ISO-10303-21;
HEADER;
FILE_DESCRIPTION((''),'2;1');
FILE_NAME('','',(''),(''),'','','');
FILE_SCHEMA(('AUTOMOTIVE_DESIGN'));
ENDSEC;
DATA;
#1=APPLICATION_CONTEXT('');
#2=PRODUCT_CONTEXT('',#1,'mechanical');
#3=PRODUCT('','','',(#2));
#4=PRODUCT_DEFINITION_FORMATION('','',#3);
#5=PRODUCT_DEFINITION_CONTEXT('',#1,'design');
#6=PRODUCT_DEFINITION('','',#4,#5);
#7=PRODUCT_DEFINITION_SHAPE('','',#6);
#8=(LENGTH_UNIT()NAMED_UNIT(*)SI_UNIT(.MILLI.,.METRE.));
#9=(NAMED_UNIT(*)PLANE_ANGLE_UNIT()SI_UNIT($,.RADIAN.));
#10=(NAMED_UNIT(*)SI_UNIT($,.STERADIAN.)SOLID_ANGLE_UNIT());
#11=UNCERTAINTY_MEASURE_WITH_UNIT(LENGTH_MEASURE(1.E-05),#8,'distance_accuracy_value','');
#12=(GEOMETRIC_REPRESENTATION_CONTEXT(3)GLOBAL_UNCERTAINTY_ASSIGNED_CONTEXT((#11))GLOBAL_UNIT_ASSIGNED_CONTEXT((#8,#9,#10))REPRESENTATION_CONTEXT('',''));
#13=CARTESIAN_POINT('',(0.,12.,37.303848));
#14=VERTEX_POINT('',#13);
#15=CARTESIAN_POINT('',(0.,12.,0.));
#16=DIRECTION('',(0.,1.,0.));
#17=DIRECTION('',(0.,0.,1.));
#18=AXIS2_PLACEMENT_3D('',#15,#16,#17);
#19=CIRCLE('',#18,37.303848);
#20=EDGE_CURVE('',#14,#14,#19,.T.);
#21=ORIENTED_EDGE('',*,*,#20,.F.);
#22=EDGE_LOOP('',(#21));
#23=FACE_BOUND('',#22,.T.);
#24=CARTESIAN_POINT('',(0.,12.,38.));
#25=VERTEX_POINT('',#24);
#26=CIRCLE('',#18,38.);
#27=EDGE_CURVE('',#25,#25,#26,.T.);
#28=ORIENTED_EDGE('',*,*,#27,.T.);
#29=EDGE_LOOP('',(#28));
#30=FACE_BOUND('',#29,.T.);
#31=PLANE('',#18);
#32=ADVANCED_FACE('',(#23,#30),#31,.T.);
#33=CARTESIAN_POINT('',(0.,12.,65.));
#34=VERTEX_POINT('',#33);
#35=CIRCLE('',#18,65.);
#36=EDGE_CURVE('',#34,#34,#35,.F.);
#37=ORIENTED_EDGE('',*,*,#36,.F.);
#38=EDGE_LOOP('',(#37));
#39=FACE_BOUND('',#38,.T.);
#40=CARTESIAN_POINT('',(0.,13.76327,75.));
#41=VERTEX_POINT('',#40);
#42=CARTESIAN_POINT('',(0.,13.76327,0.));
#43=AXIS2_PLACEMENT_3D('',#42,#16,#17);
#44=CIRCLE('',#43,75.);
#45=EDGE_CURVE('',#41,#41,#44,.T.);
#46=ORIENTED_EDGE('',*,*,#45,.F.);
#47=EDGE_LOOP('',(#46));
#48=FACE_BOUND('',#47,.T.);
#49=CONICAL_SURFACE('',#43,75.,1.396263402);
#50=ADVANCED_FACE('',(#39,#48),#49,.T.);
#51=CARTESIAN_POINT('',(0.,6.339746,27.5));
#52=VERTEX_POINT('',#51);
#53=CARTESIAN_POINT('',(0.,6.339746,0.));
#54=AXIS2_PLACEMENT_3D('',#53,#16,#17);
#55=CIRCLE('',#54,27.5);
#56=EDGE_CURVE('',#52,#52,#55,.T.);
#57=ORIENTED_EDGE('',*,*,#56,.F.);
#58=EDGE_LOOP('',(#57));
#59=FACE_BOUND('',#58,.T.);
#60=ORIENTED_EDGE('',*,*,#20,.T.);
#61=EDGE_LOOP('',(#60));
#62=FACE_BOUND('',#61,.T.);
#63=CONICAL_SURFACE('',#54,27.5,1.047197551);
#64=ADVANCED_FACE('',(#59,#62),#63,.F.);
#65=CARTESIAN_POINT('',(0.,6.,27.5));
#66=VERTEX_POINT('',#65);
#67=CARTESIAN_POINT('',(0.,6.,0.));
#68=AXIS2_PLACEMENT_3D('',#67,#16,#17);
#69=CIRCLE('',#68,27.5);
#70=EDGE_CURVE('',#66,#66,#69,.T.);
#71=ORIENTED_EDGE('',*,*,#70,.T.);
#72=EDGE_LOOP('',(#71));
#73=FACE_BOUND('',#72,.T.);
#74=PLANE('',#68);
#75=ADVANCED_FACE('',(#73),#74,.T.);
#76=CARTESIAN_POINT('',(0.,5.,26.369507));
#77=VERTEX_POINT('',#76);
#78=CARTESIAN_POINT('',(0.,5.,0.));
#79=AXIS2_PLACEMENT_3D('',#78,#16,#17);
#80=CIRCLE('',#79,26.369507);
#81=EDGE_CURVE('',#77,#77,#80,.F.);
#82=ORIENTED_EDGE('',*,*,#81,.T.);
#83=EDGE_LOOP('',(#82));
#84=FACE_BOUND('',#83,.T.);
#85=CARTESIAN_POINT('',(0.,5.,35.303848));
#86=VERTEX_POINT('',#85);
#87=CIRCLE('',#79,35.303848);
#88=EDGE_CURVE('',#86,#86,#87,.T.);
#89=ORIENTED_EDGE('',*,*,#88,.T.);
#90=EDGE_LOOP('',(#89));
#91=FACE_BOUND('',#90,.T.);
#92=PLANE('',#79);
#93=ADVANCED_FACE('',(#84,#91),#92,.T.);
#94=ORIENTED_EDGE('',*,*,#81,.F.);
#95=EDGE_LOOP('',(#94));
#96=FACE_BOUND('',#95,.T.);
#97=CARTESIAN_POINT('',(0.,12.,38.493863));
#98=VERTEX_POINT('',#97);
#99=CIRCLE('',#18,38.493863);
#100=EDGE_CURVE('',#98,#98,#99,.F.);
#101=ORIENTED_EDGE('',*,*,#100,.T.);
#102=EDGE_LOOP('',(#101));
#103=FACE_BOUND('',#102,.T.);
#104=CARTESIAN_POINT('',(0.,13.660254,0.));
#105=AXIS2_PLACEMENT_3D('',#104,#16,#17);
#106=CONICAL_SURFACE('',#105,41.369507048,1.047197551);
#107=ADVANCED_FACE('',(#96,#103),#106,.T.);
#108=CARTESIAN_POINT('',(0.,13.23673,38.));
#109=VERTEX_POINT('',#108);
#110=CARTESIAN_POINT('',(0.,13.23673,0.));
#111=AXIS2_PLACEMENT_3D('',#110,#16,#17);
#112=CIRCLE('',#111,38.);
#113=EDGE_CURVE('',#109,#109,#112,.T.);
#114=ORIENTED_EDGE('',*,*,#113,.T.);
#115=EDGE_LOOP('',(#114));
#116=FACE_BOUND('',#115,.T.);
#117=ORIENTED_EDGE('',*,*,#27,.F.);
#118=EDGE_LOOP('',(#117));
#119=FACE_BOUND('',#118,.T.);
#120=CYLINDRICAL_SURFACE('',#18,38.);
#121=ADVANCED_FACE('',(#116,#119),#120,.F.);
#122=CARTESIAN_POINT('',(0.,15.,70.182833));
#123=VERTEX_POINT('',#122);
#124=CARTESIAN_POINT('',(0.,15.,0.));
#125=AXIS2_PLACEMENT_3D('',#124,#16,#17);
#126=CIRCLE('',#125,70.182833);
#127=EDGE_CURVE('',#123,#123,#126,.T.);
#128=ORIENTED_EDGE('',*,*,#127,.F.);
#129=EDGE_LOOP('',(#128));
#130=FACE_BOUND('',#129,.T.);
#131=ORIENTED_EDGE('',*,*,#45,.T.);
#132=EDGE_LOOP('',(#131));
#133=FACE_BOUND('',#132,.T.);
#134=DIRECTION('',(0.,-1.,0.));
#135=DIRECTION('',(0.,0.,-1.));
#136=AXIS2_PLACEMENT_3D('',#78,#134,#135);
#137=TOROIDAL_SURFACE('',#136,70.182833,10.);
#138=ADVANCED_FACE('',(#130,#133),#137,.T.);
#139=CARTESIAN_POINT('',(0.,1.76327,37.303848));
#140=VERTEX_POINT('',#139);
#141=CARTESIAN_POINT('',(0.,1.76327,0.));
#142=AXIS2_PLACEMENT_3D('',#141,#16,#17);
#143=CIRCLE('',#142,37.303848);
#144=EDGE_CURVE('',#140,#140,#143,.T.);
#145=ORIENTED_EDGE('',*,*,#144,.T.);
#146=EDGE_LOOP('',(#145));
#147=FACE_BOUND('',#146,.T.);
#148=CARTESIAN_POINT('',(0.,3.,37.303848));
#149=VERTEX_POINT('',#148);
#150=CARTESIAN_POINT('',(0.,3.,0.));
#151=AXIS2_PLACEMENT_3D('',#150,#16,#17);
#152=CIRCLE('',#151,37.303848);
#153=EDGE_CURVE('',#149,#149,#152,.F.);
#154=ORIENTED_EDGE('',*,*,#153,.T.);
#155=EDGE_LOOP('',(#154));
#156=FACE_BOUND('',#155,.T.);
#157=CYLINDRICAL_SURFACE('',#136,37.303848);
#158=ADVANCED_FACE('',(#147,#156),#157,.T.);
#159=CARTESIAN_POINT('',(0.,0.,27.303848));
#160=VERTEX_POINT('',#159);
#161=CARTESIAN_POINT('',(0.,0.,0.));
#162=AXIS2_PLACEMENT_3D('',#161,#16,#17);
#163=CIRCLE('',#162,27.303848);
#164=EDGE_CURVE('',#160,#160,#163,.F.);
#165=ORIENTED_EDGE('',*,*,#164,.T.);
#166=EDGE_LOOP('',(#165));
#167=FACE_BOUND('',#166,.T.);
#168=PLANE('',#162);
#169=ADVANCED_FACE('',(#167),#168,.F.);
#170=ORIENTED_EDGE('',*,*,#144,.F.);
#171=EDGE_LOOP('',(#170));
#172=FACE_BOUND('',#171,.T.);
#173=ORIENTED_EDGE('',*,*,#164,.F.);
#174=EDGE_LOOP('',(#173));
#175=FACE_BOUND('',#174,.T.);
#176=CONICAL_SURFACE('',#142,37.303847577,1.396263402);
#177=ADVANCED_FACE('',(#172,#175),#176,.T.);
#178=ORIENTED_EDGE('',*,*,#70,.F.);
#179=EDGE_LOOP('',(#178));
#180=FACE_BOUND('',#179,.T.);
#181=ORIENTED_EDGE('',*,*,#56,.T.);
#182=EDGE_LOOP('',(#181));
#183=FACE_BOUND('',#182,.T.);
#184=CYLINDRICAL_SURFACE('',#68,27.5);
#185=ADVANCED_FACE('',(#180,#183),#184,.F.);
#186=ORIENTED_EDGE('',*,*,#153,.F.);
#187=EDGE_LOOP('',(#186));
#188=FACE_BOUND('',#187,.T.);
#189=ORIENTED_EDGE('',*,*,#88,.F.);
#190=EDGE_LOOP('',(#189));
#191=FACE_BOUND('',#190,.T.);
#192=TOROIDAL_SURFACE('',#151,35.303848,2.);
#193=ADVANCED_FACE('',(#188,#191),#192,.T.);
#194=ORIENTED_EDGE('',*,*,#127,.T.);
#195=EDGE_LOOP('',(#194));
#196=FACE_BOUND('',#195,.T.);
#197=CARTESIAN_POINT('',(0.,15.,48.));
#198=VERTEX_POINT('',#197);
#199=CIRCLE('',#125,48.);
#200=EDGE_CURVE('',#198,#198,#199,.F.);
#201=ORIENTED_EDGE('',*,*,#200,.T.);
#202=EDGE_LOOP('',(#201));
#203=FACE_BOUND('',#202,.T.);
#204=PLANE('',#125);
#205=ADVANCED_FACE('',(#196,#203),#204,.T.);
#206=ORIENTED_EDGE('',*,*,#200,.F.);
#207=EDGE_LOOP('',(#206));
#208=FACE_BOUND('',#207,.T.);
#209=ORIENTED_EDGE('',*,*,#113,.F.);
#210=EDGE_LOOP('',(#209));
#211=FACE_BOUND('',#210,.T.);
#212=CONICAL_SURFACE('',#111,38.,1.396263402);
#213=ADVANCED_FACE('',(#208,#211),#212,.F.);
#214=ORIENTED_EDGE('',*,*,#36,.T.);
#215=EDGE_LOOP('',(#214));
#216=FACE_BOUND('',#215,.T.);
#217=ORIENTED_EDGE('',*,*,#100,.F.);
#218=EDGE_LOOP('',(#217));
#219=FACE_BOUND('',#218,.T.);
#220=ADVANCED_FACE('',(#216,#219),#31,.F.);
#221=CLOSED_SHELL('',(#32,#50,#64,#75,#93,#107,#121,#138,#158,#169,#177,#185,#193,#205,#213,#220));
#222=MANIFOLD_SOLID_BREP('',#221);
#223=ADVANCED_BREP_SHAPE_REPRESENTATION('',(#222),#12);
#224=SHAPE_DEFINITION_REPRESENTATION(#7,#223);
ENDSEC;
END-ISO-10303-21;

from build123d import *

# Parameters (mm, degrees)
SKETCH1_R           = 41.369507048
BOSS_EXTRUDE1_DEPTH = 15
SKETCH3_R           = 27.5
CUT_EXTRUDE1_DEPTH  = 9
SKETCH4_R           = 41.369507048
CUT_EXTRUDE2_DEPTH  = 5
SKETCH5_R           = 53.188342474
BOSS_EXTRUDE2_DEPTH = 2
SKETCH6_R           = 40
CUT_EXTRUDE8_DEPTH  = 2
FILLET1_R           = 10
FILLET3_R           = 5
SKETCH7_R           = 75
BOSS_EXTRUDE3_DEPTH = 3
SKETCH8_R           = 38
CUT_EXTRUDE11_DEPTH = 3
CHAMFER4_SIZE       = 10
CHAMFER4_SIZE2      = 1.763269807
CHAMFER5_SIZE       = 10
CHAMFER5_SIZE2      = 1.763269807
FILLET5_R           = 10
SKETCH10_R          = 37.303847577
BOSS_EXTRUDE4_DEPTH = 5
CHAMFER6_SIZE       = 10
CHAMFER6_SIZE2      = 1.763269807
FILLET6_R           = 2


with BuildPart() as part:
    # Sketch1 → Boss-Extrude1 (new body)
    with BuildSketch(Plane(origin=(0, 0, 0), x_dir=(1, 0, 0), z_dir=(0, 1, 0))):
        with Locations(Location((0, 0, 0), (0, 0, 270))):
            Circle(SKETCH1_R)
    extrude(amount=BOSS_EXTRUDE1_DEPTH)

    # Sketch3 → Cut-Extrude1 (cut)
    with BuildSketch(Plane(origin=(0, 15, 0), x_dir=(1, 0, 0), z_dir=(0, 1, 0))):
        with Locations(Location((0, 0, 0), (0, 0, 270))):
            Circle(SKETCH3_R)
    extrude(amount=-CUT_EXTRUDE1_DEPTH, mode=Mode.SUBTRACT)

    # Sketch4 → Cut-Extrude2 (cut)
    with BuildSketch(Plane(origin=(0, 0, 0), x_dir=(1, 0, 0), z_dir=(0, 1, 0))):
        with Locations(Location((0, 0, 0), (0, 0, 270))):
            Circle(SKETCH4_R)
    extrude(amount=CUT_EXTRUDE2_DEPTH, mode=Mode.SUBTRACT)

    # Chamfer2: read off the stored shape, not the designer's step
    # Chamfer2 outline → Chamfer2 (revolve, cut)
    with BuildSketch(Plane.XY):
        Polygon((26.369507048, 5), (41.369507048, 5), (41.369507048, 13.660254038), align=None)
        Polygon((27.5, 6.339745962), (41.369507048, 14.34730959), (41.369507048, 15), (27.5, 15), align=None)
    revolve(axis=Axis((0, 0, 0), (0, 1, 0)), mode=Mode.SUBTRACT)

    # Sketch5 → Boss-Extrude2 (add)
    with BuildSketch(Plane(origin=(0, 15, 0), x_dir=(1, 0, 0), z_dir=(0, 1, 0))):
        with Locations(Location((0, 0, 0), (0, 0, 270))):
            Circle(SKETCH5_R)
    extrude(amount=-BOSS_EXTRUDE2_DEPTH)

    # Sketch6 → Cut-Extrude8 (cut)
    with BuildSketch(Plane(origin=(0, 15, 0), x_dir=(1, 0, 0), z_dir=(0, 1, 0))):
        with Locations(Location((0, 0, 0), (0, 0, 270))):
            Circle(SKETCH6_R)
    extrude(amount=-CUT_EXTRUDE8_DEPTH, mode=Mode.SUBTRACT)

    # Fillet1
    # the kernel refuses this fillet: 10 mm, written as the material it takes off along each edge
    with BuildSketch(Plane(origin=(0, 15, 0), x_dir=(0, 0, 1), z_dir=(-1, 0, 0))) as fillet1_piece_1:
        with BuildLine():
            CenterArc((46, -10), FILLET1_R, 90, 36.869897646)
            Line((40, -2), (39.88, -1.84))
            ThreePointArc((39.88, -1.84), (39.8, -1), (39.8, 0))
            Line((39.8, 0), (40, 0.2))
            Line((40, 0.2), (46, 0.2))
            Line((46, 0.2), (46, 0))
        make_face()
    revolve(axis=Axis((0, 15, 0), (0, 1, 0)), mode=Mode.SUBTRACT)

    # Fillet3
    # the kernel refuses this fillet: 5 mm, written as the material it takes off along each edge
    with BuildSketch(Plane(origin=(0, 15, 0), x_dir=(0, 0, 1), z_dir=(-1, 0, 0))) as fillet3_piece_1:
        with BuildLine():
            CenterArc((49.188342474, -5), FILLET3_R, 36.869897646, 53.130102354)
            Line((49.188342474, 0), (49.188342474, 0.1))
            Line((49.188342474, 0.1), (53.188342474, 0.1))
            Line((53.188342474, 0.1), (53.288342474, 0))
            ThreePointArc((53.288342474, 0), (53.288342474, -1), (53.268342474, -1.94))
            Line((53.268342474, -1.94), (53.188342474, -2))
        make_face()
    revolve(axis=Axis((0, 15, 0), (0, 1, 0)), mode=Mode.SUBTRACT)

    # Sketch7 → Boss-Extrude3 (add)
    with BuildSketch(Plane(origin=(0, 15, 0), x_dir=(1, 0, 0), z_dir=(0, 1, 0))):
        with Locations(Location((0, 0, 0), (0, 0, 270))):
            Circle(SKETCH7_R)
    extrude(amount=-BOSS_EXTRUDE3_DEPTH)

    # Sketch8 → Cut-Extrude11 (cut)
    with BuildSketch(Plane(origin=(0, 15, 0), x_dir=(1, 0, 0), z_dir=(0, 1, 0))):
        with Locations(Location((0, 0, 0), (0, 0, 270))):
            Circle(SKETCH8_R)
    extrude(amount=-CUT_EXTRUDE11_DEPTH, mode=Mode.SUBTRACT)

    # Chamfer4
    chamfer4_edges = [part.edges().sort_by_distance(p)[0] for p in [
        (0, 15, -38),
    ]]
    chamfer4_side = [part.faces().sort_by_distance(p)[0] for p in [
        (0, 15, -72.878679656),
    ]]
    chamfer(chamfer4_edges, length=CHAMFER4_SIZE, length2=CHAMFER4_SIZE2, reference=chamfer4_side[0])

    # Chamfer5
    chamfer5_edges = [part.edges().sort_by_distance(p)[0] for p in [
        (0, 12, -75),
    ]]
    chamfer5_side = [part.faces().sort_by_distance(p)[0] for p in [
        (0, 12, -72.878679656),
    ]]
    chamfer(chamfer5_edges, length=CHAMFER5_SIZE, length2=CHAMFER5_SIZE2, reference=chamfer5_side[0])

    # Fillet5
    # the kernel refuses this fillet: 10 mm, written as the material it takes off along each edge
    with BuildSketch(Plane(origin=(0, 15, 0), x_dir=(0, 0, 1), z_dir=(-1, 0, 0))) as fillet5_piece_1:
        with BuildLine():
            CenterArc((70.182832545, -10), FILLET5_R, 61.202414485, 28.797585515)
            Line((70.182832545, 0), (70.182832545, 0.2))
            Line((70.182832545, 0.2), (75, 0.2))
            Line((75, 0.2), (75.2, 0))
            ThreePointArc((75.2, 0), (75.2, -0.618365096), (75.096343349, -1.061464797))
            Line((75.096343349, -1.061464797), (75, -1.236730193))
        make_face()
    revolve(axis=Axis((0, 15, 0), (0, 1, 0)), mode=Mode.SUBTRACT)

    # Sketch10 → Boss-Extrude4 (add)
    with BuildSketch(Plane(origin=(0, 0, 0), x_dir=(1, 0, 0), z_dir=(0, 1, 0))):
        with Locations(Location((0, 0, 0), (0, 0, 270))):
            Circle(SKETCH10_R)
    extrude(amount=BOSS_EXTRUDE4_DEPTH)

    # Chamfer6
    chamfer6_edges = [part.edges().sort_by_distance(p)[0] for p in [
        (0, 0, -37.303847577),
    ]]
    chamfer6_side = [part.faces().sort_by_distance(p)[0] for p in [
        (0, 0, 0),
    ]]
    chamfer(chamfer6_edges, length=CHAMFER6_SIZE, length2=CHAMFER6_SIZE2, reference=chamfer6_side[0])

    # Fillet6
    fillet6_edges = [part.edges().sort_by_distance(p)[0] for p in [
        (0, 5, -37.303847577),
    ]]
    fillet(fillet6_edges, radius=FILLET6_R)


solid = part.part
